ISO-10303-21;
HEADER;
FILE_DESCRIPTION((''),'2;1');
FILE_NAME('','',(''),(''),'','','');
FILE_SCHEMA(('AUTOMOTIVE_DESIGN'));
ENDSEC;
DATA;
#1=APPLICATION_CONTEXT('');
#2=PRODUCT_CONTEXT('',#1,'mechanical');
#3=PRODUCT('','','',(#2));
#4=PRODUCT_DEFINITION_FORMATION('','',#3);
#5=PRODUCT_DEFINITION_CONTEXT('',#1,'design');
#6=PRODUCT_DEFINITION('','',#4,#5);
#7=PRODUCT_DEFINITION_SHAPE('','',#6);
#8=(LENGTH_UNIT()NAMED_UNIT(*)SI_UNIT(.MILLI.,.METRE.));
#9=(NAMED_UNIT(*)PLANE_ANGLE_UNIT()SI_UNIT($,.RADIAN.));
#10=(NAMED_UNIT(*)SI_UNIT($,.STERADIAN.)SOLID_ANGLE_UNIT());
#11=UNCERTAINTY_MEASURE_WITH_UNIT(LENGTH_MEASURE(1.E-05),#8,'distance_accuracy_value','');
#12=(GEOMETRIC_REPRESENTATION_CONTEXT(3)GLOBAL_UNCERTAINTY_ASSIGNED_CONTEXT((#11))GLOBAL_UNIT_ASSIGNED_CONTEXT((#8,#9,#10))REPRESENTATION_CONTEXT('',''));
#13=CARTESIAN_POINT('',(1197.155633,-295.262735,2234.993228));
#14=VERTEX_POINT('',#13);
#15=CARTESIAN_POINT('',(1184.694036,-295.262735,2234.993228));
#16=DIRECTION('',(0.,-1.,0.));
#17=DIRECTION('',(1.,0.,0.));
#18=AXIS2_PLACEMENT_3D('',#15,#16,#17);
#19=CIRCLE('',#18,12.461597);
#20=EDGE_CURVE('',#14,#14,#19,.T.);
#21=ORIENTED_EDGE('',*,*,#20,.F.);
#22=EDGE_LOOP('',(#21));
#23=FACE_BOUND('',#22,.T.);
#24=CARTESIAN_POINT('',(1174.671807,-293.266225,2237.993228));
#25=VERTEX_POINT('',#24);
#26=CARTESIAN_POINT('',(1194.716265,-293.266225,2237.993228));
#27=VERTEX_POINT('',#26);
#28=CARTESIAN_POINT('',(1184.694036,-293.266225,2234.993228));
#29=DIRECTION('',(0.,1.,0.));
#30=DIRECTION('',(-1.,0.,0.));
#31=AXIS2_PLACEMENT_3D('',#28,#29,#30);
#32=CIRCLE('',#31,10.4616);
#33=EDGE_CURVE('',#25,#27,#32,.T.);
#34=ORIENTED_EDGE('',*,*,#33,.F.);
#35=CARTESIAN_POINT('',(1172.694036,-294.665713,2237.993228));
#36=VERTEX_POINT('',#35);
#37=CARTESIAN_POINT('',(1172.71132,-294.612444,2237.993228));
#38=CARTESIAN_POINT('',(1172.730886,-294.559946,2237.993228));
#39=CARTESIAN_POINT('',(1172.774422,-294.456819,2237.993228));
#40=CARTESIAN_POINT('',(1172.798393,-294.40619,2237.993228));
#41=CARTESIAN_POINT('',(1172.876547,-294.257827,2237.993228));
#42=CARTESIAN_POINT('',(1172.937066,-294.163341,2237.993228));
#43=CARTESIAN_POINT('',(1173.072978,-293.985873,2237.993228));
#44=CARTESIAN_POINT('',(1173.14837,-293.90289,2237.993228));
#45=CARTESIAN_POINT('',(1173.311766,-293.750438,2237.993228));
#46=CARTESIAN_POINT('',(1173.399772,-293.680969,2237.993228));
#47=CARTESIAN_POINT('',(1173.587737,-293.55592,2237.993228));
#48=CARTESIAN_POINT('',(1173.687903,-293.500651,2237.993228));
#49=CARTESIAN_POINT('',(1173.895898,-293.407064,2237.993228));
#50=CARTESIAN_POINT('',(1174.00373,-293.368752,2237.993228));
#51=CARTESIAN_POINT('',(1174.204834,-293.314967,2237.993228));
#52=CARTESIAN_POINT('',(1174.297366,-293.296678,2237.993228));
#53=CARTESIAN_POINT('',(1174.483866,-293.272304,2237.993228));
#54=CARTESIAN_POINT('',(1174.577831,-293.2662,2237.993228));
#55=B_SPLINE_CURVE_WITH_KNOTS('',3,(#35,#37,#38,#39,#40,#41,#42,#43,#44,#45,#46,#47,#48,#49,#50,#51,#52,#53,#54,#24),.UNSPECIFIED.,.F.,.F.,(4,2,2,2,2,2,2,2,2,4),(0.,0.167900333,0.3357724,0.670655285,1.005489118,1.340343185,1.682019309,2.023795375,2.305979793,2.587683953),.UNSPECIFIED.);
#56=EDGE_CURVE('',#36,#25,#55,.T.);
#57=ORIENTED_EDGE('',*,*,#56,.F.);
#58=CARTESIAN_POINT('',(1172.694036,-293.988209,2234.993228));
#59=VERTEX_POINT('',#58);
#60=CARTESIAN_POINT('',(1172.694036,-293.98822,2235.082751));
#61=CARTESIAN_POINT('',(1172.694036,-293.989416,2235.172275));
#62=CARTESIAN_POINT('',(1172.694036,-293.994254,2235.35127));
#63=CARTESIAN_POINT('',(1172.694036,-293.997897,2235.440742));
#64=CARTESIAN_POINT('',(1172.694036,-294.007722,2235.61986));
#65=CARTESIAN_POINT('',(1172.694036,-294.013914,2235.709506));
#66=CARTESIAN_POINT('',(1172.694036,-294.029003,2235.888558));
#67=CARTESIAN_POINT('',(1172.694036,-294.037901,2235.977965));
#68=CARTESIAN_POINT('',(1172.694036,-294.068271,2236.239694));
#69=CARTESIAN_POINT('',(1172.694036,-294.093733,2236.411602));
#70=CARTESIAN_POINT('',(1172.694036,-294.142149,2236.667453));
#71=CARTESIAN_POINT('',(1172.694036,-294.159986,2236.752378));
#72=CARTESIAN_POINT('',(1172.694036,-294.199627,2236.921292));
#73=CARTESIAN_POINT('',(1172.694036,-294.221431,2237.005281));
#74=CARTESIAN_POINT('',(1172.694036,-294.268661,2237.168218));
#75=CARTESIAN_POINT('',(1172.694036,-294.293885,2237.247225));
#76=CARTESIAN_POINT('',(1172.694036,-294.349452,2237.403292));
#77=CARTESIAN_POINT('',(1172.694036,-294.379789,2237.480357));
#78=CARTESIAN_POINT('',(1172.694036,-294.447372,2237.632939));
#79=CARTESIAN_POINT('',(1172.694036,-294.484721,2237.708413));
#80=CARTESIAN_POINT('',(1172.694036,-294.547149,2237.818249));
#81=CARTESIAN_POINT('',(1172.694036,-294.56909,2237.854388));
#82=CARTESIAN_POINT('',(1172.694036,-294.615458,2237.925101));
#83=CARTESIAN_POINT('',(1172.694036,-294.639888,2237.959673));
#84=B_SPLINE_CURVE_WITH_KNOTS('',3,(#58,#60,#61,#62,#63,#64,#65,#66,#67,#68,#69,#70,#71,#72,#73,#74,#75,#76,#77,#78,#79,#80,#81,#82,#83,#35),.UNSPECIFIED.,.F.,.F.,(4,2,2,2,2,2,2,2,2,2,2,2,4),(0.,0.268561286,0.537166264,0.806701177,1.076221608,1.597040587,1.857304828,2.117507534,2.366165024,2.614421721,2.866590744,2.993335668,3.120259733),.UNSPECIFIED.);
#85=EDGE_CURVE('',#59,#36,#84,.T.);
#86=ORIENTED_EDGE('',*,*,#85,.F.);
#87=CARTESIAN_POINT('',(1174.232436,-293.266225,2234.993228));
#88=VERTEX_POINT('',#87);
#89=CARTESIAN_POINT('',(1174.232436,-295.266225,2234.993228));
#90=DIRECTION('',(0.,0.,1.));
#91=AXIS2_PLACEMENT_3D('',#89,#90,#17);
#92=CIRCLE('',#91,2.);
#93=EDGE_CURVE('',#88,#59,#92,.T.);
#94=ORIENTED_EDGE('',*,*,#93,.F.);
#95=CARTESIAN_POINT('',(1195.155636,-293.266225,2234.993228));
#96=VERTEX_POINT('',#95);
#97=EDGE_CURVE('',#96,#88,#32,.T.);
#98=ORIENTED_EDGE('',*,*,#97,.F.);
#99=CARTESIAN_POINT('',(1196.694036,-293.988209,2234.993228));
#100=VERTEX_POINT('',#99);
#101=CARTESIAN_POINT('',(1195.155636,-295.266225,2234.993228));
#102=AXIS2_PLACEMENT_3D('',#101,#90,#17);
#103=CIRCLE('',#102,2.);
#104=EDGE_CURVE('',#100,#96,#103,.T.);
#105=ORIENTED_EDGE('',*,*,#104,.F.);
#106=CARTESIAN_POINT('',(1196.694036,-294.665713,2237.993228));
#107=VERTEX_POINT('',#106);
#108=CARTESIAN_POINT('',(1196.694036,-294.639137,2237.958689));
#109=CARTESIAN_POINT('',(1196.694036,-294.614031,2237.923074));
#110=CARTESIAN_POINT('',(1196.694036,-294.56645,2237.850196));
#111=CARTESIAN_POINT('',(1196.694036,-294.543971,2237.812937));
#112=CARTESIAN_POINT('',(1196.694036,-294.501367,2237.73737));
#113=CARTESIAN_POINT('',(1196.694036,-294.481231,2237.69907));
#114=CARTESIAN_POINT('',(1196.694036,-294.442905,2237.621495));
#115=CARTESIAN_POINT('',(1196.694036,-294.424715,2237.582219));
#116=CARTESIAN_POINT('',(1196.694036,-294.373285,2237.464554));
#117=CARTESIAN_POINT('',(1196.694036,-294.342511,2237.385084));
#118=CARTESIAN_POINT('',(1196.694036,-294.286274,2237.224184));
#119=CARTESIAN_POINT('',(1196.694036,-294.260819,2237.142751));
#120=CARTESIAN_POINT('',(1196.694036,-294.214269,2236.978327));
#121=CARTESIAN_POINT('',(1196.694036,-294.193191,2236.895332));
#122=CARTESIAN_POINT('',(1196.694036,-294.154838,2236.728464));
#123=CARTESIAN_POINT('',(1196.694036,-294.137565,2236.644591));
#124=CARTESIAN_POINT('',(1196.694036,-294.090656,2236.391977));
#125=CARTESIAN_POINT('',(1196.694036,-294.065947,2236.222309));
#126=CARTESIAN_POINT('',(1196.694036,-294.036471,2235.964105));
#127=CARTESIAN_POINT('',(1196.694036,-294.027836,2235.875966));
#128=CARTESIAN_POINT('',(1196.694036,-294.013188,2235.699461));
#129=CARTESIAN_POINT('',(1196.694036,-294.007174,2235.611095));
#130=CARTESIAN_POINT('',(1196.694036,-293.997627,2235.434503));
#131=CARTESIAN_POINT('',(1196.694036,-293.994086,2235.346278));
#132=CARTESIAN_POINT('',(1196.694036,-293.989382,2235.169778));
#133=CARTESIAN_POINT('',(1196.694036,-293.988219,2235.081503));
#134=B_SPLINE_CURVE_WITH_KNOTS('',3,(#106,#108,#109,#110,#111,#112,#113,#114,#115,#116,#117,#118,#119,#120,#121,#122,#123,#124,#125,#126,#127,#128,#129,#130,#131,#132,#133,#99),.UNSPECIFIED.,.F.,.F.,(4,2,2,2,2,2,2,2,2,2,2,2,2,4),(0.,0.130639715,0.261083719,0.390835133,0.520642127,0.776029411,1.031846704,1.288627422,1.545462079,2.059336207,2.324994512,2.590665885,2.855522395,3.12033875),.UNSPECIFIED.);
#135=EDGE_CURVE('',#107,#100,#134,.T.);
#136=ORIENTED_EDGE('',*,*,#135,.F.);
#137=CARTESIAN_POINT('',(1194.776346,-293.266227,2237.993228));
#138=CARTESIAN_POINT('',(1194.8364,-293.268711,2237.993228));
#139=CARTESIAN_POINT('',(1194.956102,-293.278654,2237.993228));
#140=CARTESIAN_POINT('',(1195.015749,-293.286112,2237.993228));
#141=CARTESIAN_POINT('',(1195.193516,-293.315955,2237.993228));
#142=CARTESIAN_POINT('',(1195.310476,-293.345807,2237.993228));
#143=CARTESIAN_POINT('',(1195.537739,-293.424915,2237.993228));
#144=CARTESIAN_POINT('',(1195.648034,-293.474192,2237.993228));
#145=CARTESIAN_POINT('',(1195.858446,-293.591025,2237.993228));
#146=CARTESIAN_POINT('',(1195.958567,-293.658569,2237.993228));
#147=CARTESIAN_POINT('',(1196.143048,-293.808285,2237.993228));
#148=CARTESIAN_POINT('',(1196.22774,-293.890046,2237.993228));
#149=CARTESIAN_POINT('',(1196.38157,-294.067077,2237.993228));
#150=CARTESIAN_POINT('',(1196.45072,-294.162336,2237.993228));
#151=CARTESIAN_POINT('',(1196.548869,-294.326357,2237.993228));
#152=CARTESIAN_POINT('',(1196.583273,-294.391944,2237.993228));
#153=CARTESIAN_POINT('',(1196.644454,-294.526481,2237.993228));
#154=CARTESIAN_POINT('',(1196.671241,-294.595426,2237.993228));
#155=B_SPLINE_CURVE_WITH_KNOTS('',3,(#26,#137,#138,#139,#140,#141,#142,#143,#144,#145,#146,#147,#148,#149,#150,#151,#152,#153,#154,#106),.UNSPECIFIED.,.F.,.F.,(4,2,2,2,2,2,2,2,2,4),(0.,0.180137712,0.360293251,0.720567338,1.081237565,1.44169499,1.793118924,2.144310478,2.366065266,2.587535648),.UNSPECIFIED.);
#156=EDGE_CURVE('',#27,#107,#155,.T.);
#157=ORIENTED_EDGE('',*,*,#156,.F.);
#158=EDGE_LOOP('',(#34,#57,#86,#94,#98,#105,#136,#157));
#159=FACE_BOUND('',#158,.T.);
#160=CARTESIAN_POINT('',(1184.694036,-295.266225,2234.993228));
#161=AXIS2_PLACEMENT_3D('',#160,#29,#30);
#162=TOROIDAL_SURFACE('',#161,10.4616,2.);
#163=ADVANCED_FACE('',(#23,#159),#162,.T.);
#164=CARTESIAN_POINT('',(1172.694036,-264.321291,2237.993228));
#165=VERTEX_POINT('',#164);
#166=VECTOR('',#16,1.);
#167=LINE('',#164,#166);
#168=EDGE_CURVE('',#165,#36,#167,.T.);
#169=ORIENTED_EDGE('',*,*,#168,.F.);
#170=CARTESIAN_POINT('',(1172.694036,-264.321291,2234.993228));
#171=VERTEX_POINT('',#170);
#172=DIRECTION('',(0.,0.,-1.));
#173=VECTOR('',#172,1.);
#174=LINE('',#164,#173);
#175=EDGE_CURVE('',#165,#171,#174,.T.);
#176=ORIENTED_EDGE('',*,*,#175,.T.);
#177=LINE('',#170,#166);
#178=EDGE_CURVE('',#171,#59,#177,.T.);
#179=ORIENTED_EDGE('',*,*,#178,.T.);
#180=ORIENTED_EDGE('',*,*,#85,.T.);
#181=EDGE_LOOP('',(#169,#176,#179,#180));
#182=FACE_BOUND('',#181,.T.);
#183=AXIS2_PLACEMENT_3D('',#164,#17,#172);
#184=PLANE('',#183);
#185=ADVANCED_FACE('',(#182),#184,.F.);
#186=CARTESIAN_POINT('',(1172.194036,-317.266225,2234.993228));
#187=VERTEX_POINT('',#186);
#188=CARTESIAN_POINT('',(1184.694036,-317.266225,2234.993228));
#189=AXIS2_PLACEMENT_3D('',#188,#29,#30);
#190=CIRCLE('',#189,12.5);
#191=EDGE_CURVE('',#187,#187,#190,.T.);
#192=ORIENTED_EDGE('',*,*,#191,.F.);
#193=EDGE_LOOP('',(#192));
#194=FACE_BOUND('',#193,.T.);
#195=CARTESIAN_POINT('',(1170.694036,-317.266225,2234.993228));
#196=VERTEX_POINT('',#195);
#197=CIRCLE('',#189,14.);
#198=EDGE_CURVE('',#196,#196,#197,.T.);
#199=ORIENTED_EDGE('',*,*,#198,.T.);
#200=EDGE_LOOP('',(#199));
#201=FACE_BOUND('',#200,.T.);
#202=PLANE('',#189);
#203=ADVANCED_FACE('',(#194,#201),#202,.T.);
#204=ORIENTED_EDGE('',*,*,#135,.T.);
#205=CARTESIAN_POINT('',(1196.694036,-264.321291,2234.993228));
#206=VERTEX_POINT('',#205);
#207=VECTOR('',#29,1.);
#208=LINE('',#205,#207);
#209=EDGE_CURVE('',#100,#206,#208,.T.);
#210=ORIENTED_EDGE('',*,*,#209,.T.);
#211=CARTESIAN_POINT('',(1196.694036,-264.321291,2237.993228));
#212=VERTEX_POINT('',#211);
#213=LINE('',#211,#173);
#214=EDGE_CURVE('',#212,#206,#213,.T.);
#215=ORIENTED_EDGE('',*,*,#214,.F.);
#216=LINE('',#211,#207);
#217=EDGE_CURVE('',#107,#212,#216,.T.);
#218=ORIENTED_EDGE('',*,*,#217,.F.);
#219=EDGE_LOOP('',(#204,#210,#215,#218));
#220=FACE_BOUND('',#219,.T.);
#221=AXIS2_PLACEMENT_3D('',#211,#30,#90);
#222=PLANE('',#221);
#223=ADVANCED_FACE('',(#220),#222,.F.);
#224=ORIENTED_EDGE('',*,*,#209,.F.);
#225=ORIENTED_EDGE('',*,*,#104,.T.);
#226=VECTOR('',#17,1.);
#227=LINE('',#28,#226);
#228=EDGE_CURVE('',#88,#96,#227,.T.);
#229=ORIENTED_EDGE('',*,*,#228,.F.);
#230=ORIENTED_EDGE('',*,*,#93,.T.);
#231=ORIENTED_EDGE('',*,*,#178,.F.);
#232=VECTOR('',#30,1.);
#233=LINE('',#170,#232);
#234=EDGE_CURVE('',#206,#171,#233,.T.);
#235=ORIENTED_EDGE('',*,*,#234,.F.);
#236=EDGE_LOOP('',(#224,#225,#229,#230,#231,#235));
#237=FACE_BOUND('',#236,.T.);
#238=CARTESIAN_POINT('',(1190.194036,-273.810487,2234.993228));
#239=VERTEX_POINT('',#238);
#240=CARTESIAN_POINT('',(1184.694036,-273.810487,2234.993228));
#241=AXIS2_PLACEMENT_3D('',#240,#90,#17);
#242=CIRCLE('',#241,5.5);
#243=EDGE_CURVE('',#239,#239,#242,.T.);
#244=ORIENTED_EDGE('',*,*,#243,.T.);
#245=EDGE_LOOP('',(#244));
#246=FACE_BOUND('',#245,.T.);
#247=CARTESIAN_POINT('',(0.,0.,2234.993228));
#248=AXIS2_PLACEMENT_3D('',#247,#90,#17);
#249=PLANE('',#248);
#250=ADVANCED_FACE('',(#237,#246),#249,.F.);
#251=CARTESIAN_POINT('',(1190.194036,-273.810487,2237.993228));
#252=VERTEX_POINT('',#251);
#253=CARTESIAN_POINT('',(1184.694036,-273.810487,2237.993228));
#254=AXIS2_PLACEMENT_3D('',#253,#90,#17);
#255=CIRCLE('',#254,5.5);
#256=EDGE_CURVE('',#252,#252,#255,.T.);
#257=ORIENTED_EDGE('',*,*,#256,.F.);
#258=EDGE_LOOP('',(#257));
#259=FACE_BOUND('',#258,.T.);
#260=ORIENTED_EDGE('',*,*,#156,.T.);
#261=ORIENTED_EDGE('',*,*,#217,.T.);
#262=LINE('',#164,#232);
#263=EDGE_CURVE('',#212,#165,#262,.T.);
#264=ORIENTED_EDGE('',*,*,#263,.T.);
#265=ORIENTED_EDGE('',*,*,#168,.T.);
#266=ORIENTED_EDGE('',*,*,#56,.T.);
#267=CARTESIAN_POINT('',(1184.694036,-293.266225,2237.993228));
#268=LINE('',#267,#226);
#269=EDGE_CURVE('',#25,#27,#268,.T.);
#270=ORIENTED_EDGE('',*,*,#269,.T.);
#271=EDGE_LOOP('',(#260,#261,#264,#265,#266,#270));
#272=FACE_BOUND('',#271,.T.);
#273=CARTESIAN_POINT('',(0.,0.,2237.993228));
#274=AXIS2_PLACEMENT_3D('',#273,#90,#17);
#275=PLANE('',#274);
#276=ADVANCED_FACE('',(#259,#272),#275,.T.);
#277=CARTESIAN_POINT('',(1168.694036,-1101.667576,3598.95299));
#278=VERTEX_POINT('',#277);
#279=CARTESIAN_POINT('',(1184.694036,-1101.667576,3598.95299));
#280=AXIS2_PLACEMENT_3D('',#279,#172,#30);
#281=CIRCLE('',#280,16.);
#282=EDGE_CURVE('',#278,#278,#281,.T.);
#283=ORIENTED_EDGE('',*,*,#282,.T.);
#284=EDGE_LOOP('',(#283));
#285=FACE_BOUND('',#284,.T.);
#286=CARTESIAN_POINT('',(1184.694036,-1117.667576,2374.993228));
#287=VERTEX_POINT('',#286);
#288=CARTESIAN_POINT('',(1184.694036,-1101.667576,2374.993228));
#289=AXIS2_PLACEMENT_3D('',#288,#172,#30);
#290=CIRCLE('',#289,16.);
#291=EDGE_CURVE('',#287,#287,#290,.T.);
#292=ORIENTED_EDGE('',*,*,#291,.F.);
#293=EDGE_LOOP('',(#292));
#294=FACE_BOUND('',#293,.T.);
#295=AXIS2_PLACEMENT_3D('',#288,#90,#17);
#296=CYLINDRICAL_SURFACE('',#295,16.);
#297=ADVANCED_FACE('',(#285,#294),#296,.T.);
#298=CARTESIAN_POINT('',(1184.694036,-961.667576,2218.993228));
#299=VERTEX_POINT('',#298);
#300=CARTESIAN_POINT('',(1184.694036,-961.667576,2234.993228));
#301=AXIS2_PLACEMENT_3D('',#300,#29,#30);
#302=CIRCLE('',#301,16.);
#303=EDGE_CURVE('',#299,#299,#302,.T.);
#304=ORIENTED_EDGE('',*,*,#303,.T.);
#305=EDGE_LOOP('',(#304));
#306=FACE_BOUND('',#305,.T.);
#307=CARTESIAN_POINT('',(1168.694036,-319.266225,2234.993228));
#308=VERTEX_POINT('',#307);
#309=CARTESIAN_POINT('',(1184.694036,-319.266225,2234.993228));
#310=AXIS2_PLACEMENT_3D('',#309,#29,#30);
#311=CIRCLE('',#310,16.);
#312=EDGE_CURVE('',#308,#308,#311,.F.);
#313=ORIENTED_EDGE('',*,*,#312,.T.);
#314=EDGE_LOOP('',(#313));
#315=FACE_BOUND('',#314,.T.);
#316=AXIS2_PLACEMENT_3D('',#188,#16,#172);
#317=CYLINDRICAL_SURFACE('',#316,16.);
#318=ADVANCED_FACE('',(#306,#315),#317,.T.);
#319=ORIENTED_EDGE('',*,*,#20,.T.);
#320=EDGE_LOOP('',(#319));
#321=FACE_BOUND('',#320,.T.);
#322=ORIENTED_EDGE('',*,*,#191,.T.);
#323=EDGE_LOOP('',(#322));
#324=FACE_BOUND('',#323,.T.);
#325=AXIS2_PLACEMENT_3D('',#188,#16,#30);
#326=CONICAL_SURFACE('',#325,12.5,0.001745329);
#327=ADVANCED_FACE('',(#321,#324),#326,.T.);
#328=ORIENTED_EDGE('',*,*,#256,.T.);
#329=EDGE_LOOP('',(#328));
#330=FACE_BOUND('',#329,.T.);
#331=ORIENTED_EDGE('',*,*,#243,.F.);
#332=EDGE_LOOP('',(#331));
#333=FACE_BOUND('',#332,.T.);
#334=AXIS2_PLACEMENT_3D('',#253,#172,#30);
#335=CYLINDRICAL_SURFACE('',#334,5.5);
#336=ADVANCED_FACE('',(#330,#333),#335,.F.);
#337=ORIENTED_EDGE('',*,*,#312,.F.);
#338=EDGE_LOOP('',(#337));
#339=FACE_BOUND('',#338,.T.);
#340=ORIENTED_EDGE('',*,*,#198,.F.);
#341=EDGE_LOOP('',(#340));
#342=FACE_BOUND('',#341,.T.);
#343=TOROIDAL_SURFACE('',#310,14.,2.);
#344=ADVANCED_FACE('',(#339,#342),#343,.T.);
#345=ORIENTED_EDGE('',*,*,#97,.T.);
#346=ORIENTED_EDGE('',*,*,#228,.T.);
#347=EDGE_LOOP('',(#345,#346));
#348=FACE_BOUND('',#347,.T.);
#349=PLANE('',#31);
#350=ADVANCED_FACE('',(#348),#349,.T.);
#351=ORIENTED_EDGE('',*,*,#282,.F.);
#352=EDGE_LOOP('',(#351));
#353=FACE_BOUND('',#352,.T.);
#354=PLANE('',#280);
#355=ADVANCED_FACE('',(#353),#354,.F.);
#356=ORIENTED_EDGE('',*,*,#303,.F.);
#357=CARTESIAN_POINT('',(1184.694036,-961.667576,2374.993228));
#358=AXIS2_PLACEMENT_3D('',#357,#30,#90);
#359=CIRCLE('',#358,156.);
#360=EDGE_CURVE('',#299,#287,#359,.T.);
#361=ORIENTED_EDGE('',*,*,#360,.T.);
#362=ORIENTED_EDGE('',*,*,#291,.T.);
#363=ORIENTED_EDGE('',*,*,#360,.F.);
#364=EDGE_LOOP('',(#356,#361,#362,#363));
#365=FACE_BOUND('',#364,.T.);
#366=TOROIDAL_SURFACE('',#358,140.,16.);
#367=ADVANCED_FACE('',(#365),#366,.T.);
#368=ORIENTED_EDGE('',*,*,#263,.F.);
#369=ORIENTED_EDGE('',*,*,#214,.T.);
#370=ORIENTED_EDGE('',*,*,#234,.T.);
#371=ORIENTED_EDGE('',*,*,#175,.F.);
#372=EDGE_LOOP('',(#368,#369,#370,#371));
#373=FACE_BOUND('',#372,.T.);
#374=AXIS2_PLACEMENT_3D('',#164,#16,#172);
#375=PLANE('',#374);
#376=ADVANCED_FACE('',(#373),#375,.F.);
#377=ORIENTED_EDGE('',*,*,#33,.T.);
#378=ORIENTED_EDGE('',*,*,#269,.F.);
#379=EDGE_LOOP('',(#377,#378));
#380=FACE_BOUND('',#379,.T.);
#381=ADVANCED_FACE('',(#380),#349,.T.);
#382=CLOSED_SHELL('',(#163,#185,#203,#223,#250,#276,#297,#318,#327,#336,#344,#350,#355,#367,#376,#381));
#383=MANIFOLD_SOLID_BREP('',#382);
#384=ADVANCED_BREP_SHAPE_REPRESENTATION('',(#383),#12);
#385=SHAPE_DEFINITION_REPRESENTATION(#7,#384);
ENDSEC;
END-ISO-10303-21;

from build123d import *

# Parameters (mm, degrees)
BARRER1_PROFILE_R       = 16
CROQUIS22_W             = 24
CROQUIS22_H             = 30
CROQUIS22_R             = 5.5
SALIENTE_EXTRUIR1_DEPTH = 3
CROQUIS23_R             = 12.5
SALIENTE_EXTRUIR2_DEPTH = 24
SALIENTE_EXTRUIR2_TAPER = 0.1
REDONDEO1_R             = 2
REDONDEO2_R             = 2


with BuildPart() as part:
    # Barrer1: sweep along a curve in space
    with BuildLine() as barrer1_path:
        Line((1184.694036121, -317.266225222, 2234.993228397), (1184.694036121, -961.667575773, 2234.993228397))
        ThreePointArc((1184.694036121, -961.667575773, 2234.993228397), (1184.694036121, -1060.66252514, 2275.998279031), (1184.694036121, -1101.667575773, 2374.993228397))
        Line((1184.694036121, -1101.667575773, 2374.993228397), (1184.694036121, -1101.667575773, 3598.952990458))
    # Barrer1 profile (on start of the path) → Barrer1 (sweep)
    with BuildSketch(Plane(origin=(1184.694036121, -317.266225222, 2234.993228397), x_dir=(0, 0, -1), z_dir=(0, -1, 0))):
        Circle(BARRER1_PROFILE_R)
    sweep(path=barrer1_path.line)



with BuildPart() as body_2:
    # Croquis22 → Saliente-Extruir1 (new body)
    with BuildSketch(Plane.XY.offset(2234.993228397)):
        with Locations((1184.694036121, -279.321290843)):
            Rectangle(CROQUIS22_W, CROQUIS22_H)
        with Locations((1184.694036121, -273.810487485)):
            Circle(CROQUIS22_R, mode=Mode.SUBTRACT)
    extrude(amount=SALIENTE_EXTRUIR1_DEPTH)


with BuildPart() as part_1:
    add(part.part)

    add(body_2.part)  # Saliente-Extruir2 merges body 2
    # Croquis23 → Saliente-Extruir2 (add)
    with BuildSketch(Plane(origin=(0, -317.266225222, 0), x_dir=(1, 0, 0), z_dir=(0, 1, 0))):
        with Locations((1184.694036121, -2234.993228397)):
            Circle(CROQUIS23_R)
    extrude(amount=SALIENTE_EXTRUIR2_DEPTH, taper=SALIENTE_EXTRUIR2_TAPER)

    # Redondeo1
    # the kernel refuses this fillet: 2 mm, written as the material it takes off along each edge
    with BuildSketch(Plane(origin=(1184.694036121, -293.266225222, 2234.993228397), x_dir=(1, 0, 0), z_dir=(0, 0, -1))) as redondeo1_piece_1_section:
        with BuildLine():
            CenterArc((12.458112055 - REDONDEO1_R * 0.998256192065, REDONDEO1_R), REDONDEO1_R, 270, 89.9)
            Line((12.458112055 - REDONDEO1_R * 0.998256192065, 0), (12.458112055, 0))
            Line((12.458112055, 0), (12.458112055 + REDONDEO1_R * 0.00174228484855, REDONDEO1_R * 0.998254671634))
        make_face()
    redondeo1_piece_1 = revolve(axis=Axis((1184.694036121, -293.266225222, 2234.993228397), (0, -1, 0)), mode=Mode.PRIVATE)
    redondeo1_piece_1 = split(redondeo1_piece_1, bisect_by=Plane(origin=(1196.694036121, -293.909040816, 2236.28595065), z_dir=(1, 0, 0)), keep=Keep.TOP, mode=Mode.PRIVATE)
    add(redondeo1_piece_1, mode=Mode.SUBTRACT)
    with BuildSketch(Plane(origin=(1184.694036121, -293.266225222, 2234.993228397), x_dir=(1, 0, 0), z_dir=(0, 0, -1))) as redondeo1_piece_2_section:
        with BuildLine():
            CenterArc((12.458112055 - REDONDEO1_R * 0.998256192065, REDONDEO1_R), REDONDEO1_R, 270, 89.9)
            Line((12.458112055 - REDONDEO1_R * 0.998256192065, 0), (12.458112055, 0))
            Line((12.458112055, 0), (12.458112055 + REDONDEO1_R * 0.00174228484855, REDONDEO1_R * 0.998254671634))
        make_face()
    redondeo1_piece_2 = revolve(axis=Axis((1184.694036121, -293.266225222, 2234.993228397), (0, -1, 0)), mode=Mode.PRIVATE)
    redondeo1_piece_2 = split(redondeo1_piece_2, bisect_by=Plane(origin=(1184.694036121, -293.82884964, 2234.993228397), z_dir=(0, 0, -1)), keep=Keep.TOP, mode=Mode.PRIVATE)
    add(redondeo1_piece_2, mode=Mode.SUBTRACT)
    with BuildSketch(Plane(origin=(1184.694036121, -293.266225222, 2234.993228397), x_dir=(1, 0, 0), z_dir=(0, 0, -1))) as redondeo1_piece_3_section:
        with BuildLine():
            CenterArc((12.458112055 - REDONDEO1_R * 0.998256192065, REDONDEO1_R), REDONDEO1_R, 270, 89.9)
            Line((12.458112055 - REDONDEO1_R * 0.998256192065, 0), (12.458112055, 0))
            Line((12.458112055, 0), (12.458112055 + REDONDEO1_R * 0.00174228484855, REDONDEO1_R * 0.998254671634))
        make_face()
    redondeo1_piece_3 = revolve(axis=Axis((1184.694036121, -293.266225222, 2234.993228397), (0, -1, 0)), mode=Mode.PRIVATE)
    redondeo1_piece_3 = split(redondeo1_piece_3, bisect_by=Plane(origin=(1184.694036121, -293.82954, 2237.993228397), z_dir=(0, 0, 1)), keep=Keep.TOP, mode=Mode.PRIVATE)
    add(redondeo1_piece_3, mode=Mode.SUBTRACT)
    with BuildSketch(Plane(origin=(1184.694036121, -293.266225222, 2234.993228397), x_dir=(1, 0, 0), z_dir=(0, 0, -1))) as redondeo1_piece_4_section:
        with BuildLine():
            CenterArc((12.458112055 - REDONDEO1_R * 0.998256192065, REDONDEO1_R), REDONDEO1_R, 270, 89.9)
            Line((12.458112055 - REDONDEO1_R * 0.998256192065, 0), (12.458112055, 0))
            Line((12.458112055, 0), (12.458112055 + REDONDEO1_R * 0.00174228484855, REDONDEO1_R * 0.998254671634))
        make_face()
    redondeo1_piece_4 = revolve(axis=Axis((1184.694036121, -293.266225222, 2234.993228397), (0, -1, 0)), mode=Mode.PRIVATE)
    redondeo1_piece_4 = split(redondeo1_piece_4, bisect_by=Plane(origin=(1172.694036121, -293.908477317, 2236.286131644), z_dir=(-1, 0, 0)), keep=Keep.TOP, mode=Mode.PRIVATE)
    add(redondeo1_piece_4, mode=Mode.SUBTRACT)

    # Redondeo2
    redondeo2_edges = [part_1.edges().sort_by_distance(p)[0] for p in [
        (1184.694036121, -317.266225222, 2250.993228397),
    ]]
    fillet(redondeo2_edges, radius=REDONDEO2_R)


solid = part_1.part
